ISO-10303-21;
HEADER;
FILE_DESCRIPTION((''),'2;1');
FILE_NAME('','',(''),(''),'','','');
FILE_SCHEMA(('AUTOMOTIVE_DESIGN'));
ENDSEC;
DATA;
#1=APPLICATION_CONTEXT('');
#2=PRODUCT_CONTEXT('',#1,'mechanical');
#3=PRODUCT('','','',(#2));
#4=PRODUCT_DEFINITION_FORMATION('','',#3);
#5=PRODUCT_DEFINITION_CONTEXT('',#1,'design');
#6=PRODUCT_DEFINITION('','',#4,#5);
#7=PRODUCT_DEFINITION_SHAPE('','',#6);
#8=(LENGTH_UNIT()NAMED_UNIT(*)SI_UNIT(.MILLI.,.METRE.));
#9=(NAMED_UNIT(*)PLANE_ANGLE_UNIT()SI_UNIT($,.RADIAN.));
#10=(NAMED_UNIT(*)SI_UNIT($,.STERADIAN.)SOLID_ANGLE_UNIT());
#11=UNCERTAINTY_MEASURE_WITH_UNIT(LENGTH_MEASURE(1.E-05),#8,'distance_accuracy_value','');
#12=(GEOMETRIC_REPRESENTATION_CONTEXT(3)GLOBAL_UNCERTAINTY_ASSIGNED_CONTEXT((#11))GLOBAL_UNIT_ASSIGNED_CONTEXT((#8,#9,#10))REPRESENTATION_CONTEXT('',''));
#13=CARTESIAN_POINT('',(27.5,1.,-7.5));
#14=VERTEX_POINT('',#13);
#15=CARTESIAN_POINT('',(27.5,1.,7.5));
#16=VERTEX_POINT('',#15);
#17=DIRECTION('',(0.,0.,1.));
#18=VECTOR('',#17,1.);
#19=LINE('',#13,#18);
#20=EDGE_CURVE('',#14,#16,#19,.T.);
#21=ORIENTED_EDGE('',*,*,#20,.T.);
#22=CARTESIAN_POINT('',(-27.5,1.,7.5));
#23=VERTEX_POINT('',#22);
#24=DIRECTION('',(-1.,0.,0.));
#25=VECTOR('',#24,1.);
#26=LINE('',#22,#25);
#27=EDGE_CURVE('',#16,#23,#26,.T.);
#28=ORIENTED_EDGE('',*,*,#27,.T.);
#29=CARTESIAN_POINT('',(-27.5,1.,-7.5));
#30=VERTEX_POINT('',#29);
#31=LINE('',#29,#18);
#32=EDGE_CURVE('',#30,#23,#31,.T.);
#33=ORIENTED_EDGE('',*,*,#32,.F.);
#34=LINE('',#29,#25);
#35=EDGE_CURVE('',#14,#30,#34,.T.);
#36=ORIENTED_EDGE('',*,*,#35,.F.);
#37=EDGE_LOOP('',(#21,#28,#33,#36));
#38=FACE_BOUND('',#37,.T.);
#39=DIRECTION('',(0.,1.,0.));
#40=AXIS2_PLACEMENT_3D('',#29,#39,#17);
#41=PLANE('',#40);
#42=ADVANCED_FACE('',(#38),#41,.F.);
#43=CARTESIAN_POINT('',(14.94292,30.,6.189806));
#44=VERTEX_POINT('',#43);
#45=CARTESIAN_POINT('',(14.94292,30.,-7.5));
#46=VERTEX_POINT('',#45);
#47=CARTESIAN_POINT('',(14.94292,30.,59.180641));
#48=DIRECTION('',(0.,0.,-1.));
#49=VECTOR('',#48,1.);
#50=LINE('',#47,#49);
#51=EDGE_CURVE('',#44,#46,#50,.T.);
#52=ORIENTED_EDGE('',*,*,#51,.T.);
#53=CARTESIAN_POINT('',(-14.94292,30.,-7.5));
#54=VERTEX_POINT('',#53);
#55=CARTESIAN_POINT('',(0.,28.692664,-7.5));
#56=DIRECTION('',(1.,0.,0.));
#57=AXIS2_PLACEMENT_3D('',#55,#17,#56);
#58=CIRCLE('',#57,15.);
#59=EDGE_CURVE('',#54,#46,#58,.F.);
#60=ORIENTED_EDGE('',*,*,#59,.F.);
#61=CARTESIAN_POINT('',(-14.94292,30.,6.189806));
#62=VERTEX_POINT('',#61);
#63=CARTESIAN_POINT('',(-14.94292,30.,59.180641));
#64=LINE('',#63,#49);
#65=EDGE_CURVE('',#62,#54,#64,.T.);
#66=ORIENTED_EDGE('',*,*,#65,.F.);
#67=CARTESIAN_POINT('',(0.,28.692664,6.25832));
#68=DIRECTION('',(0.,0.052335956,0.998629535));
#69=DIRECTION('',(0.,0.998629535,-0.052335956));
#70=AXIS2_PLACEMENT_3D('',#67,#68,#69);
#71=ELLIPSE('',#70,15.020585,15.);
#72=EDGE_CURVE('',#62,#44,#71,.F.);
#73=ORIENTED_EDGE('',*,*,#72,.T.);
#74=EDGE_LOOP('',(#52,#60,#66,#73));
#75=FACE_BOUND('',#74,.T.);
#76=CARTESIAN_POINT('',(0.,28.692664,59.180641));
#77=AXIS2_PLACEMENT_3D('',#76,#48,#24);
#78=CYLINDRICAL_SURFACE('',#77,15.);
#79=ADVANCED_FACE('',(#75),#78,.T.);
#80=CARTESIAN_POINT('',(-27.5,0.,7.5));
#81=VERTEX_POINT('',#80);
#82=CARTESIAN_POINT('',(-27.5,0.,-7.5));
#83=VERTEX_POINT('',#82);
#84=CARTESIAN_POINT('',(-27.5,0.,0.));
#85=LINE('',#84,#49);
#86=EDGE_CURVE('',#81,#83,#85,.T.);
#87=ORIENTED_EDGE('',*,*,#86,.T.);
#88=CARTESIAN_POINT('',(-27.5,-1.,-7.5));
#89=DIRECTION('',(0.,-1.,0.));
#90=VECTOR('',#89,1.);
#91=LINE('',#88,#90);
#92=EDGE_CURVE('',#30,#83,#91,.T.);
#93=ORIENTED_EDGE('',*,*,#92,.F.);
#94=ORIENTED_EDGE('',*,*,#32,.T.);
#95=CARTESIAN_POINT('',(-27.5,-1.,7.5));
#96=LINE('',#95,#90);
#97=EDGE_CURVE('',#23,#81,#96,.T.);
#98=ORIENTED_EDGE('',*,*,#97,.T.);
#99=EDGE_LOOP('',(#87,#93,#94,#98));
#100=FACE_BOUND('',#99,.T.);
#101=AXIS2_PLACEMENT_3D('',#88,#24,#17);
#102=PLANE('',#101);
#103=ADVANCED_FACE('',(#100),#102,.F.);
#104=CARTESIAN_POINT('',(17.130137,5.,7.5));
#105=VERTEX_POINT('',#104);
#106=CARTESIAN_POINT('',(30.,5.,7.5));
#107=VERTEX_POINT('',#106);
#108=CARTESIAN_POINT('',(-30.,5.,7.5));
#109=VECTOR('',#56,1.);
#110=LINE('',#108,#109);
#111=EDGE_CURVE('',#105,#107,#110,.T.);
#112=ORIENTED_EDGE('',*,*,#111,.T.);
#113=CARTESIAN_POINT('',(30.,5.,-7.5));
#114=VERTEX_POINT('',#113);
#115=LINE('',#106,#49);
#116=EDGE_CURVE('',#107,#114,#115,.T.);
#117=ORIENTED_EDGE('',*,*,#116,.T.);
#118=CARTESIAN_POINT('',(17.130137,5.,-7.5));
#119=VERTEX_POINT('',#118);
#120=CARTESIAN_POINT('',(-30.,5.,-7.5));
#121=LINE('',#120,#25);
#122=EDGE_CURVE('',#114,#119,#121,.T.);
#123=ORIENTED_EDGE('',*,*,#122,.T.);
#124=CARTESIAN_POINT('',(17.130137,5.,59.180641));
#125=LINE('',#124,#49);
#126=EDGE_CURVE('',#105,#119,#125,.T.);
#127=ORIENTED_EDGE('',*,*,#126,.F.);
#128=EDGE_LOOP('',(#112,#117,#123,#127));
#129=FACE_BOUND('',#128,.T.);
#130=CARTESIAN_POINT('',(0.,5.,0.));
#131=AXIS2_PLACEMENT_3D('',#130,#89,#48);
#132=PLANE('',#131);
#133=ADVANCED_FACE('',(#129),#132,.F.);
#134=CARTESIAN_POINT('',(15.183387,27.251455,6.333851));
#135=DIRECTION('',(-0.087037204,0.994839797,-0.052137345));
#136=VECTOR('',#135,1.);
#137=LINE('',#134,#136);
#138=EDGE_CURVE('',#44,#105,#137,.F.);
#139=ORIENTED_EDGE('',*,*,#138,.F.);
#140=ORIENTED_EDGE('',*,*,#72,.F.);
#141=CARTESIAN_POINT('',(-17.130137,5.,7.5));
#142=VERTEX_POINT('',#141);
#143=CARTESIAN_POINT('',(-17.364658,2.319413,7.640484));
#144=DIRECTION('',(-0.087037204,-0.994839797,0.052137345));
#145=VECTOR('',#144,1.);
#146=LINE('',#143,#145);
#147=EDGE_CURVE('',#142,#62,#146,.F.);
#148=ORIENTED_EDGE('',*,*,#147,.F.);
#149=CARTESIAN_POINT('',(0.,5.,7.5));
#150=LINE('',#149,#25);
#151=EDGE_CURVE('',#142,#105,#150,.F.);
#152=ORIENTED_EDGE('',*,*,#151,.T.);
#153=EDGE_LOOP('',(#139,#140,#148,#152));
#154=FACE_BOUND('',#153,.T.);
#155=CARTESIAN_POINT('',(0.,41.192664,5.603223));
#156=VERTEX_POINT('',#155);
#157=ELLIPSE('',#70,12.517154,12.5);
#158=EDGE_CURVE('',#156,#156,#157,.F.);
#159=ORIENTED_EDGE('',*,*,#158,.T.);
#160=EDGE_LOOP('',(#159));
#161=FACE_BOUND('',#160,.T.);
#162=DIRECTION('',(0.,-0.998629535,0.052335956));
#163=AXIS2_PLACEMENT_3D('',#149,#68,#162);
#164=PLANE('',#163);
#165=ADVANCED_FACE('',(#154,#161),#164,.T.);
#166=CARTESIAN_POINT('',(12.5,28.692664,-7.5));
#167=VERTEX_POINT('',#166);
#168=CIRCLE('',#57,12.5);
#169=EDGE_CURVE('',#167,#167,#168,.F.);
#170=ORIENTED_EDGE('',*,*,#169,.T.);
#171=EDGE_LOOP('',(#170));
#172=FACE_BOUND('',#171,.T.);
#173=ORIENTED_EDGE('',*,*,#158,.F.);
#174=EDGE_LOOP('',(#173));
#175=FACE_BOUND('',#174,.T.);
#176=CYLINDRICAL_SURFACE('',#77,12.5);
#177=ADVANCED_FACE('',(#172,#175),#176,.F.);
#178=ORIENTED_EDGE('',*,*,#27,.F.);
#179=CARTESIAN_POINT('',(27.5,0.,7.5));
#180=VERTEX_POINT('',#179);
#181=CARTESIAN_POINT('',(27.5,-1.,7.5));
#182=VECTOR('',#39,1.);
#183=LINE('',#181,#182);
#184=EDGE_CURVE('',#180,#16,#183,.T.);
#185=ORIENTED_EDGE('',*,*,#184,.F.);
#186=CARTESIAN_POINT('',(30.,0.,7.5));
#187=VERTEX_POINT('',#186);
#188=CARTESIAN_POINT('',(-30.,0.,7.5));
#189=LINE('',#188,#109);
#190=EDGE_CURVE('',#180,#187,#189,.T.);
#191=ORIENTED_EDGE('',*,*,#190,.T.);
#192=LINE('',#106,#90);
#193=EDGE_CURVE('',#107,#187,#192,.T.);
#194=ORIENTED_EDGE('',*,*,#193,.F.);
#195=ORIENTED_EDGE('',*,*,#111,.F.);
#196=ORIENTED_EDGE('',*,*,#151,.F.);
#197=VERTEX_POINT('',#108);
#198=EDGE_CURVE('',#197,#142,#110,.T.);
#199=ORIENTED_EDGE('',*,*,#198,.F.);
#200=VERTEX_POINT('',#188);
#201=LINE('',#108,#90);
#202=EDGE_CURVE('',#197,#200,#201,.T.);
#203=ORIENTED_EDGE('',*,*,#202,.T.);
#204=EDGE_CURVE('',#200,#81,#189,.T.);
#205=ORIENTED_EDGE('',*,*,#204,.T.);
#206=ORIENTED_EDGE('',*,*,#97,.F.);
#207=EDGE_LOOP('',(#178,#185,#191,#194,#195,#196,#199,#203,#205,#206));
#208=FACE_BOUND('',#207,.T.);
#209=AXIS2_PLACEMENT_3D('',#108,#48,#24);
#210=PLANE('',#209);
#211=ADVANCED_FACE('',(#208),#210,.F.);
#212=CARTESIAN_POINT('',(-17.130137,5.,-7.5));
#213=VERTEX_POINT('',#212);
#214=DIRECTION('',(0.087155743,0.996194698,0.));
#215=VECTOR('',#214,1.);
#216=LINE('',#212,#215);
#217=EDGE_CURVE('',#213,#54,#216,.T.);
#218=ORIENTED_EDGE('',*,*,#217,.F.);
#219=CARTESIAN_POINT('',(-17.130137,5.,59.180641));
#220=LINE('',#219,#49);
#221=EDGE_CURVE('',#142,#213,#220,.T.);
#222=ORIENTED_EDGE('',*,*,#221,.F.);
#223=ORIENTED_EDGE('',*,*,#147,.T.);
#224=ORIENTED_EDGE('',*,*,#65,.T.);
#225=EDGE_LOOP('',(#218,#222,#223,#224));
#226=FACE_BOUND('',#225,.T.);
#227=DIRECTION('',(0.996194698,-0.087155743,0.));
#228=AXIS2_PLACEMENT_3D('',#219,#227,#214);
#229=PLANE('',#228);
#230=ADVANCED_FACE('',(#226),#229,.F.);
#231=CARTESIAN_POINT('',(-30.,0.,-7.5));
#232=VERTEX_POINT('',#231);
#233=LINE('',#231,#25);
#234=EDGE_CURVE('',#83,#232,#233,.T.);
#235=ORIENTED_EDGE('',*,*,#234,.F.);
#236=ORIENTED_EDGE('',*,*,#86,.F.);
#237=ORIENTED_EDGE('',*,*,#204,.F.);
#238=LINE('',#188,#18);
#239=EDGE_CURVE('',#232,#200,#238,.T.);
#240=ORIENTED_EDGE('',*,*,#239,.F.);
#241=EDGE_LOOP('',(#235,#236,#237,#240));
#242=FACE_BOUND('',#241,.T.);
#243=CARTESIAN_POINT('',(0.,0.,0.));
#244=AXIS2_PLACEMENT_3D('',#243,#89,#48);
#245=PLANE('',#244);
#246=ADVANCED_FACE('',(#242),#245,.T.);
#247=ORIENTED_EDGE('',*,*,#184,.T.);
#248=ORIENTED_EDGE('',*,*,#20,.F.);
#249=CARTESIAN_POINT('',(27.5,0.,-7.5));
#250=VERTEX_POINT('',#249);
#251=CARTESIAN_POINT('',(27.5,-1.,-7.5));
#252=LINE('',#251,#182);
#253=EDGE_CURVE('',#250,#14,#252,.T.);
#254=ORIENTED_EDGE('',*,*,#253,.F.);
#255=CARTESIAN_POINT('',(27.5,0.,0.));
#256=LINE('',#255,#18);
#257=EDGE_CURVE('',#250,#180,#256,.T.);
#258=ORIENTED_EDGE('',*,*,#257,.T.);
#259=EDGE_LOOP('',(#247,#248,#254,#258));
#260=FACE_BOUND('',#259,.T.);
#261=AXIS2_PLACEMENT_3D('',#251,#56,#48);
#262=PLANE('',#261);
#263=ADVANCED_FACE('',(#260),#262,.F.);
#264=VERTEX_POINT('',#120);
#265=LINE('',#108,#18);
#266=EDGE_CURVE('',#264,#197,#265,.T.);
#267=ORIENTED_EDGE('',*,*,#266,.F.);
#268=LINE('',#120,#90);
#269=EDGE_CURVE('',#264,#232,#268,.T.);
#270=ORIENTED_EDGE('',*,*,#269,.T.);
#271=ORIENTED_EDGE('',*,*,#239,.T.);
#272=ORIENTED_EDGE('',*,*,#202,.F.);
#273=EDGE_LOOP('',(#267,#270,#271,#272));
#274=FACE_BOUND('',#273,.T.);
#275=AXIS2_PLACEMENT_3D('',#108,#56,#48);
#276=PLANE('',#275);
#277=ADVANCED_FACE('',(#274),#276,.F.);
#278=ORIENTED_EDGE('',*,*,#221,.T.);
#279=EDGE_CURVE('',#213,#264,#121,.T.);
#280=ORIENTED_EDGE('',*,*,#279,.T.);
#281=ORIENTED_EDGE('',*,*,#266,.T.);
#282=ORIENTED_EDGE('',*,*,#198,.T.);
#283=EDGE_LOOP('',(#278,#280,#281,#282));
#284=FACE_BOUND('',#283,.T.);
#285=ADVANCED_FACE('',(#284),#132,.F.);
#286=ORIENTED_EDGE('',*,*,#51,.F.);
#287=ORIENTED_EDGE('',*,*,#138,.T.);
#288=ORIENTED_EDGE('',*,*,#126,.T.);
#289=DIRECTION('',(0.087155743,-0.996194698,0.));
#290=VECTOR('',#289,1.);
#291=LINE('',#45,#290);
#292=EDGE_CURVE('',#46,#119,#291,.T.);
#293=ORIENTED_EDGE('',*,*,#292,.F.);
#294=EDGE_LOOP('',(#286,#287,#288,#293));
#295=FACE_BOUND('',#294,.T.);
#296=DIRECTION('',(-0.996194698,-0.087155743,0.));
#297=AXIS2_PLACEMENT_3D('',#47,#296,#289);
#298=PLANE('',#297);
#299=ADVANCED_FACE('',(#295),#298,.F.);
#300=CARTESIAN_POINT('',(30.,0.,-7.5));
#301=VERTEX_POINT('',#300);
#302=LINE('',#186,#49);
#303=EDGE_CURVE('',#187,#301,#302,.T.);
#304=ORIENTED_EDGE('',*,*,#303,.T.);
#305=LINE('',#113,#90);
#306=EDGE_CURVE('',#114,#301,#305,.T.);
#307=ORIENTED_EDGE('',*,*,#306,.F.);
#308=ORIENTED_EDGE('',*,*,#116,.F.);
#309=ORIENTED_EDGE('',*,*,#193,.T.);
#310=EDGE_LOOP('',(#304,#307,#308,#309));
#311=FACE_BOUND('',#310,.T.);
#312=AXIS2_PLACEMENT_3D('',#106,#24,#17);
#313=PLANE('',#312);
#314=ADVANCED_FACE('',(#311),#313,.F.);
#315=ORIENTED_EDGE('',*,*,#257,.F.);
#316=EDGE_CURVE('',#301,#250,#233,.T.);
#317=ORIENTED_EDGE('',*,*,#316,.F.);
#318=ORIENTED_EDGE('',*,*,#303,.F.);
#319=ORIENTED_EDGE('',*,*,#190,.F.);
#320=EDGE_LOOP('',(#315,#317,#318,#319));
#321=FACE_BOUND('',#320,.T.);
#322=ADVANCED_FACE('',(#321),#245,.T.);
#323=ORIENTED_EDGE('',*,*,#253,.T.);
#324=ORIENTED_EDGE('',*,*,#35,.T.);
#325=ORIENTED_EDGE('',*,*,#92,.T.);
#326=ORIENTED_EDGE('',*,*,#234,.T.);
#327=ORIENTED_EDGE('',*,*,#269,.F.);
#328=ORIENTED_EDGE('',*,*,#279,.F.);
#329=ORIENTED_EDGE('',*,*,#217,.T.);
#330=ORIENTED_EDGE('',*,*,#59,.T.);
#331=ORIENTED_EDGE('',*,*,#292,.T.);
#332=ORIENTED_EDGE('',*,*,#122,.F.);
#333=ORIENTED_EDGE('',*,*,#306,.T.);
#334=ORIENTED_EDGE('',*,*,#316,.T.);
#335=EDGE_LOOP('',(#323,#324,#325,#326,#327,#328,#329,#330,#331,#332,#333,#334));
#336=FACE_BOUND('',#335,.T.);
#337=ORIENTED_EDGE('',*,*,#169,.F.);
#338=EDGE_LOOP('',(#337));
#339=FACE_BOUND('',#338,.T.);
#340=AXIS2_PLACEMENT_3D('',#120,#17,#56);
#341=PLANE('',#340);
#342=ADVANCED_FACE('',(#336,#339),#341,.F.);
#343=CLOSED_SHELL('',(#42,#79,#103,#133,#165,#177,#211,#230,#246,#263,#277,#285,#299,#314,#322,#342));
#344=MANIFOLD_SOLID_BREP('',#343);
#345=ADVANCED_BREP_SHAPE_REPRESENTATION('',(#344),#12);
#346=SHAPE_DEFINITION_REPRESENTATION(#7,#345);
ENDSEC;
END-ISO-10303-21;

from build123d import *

# Parameters (mm, degrees)
SKETCH1_W                       = 60
SKETCH1_H                       = 15
BOSS_EXTRUDE1_DEPTH             = 5
BOSS_EXTRUDE2_REACH             = 33.325
SKETCH2_R                       = 12.5
BOSS_EXTRUDE2_DIRECTION_2_REACH = 33.325
SKETCH3_W                       = 55
SKETCH3_H                       = 2
CUT_EXTRUDE1_DEPTH              = 56.082201073
DRAFT1_START                    = 7.751401292
DRAFT1_DEPTH                    = 3.248598708


with BuildPart() as part:
    # Sketch1 → Boss-Extrude1 (new body)
    with BuildSketch(Plane(origin=(0, 0, 0), x_dir=(1, 0, 0), z_dir=(0, 1, 0))):
        Rectangle(SKETCH1_W, SKETCH1_H)
    extrude(amount=BOSS_EXTRUDE1_DEPTH)

    # Boss-Extrude2: up to this face of the body (flat: up to its plane)
    boss_extrude2_end = Plane(part.part.faces().sort_by_distance((0, 2.5, 7.5))[0])
    # Sketch2 → Boss-Extrude2 (add, up to the picked face)
    with BuildSketch(Plane.XY, mode=Mode.PRIVATE) as boss_extrude2_sk1:
        with BuildLine():
            Line((-17.13013706, 5), (-14.942920471, 30))
            ThreePointArc((-14.942920471, 30), (0, 43.692663859), (14.942920471, 30))
            Line((14.942920471, 30), (17.13013706, 5))
            Line((17.13013706, 5), (-17.13013706, 5))
        make_face()
        with Locations(Location((0, 28.692663859, 0), (0, 0, 180))):
            Circle(SKETCH2_R, mode=Mode.SUBTRACT)
    boss_extrude2_tool1 = split(extrude(boss_extrude2_sk1.sketch, amount=BOSS_EXTRUDE2_REACH, mode=Mode.PRIVATE), bisect_by=boss_extrude2_end, keep=Keep.BOTH, mode=Mode.PRIVATE)
    add(boss_extrude2_tool1.solids().sort_by(Axis((15.521689, 17.454957, 0), (0, 0, 1)))[0])

    # Boss-Extrude2 direction 2: up to this face of the body (flat: up to its plane)
    boss_extrude2_direction_2_end = Plane(part.part.faces().sort_by_distance((0, 2.5, -7.5))[0])
    # Sketch2 → Boss-Extrude2 direction 2 (add, up to the picked face)
    with BuildSketch(Plane.XY, mode=Mode.PRIVATE) as boss_extrude2_direction_2_sk1:
        with BuildLine():
            Line((-17.13013706, 5), (-14.942920471, 30))
            ThreePointArc((-14.942920471, 30), (0, 43.692663859), (14.942920471, 30))
            Line((14.942920471, 30), (17.13013706, 5))
            Line((17.13013706, 5), (-17.13013706, 5))
        make_face()
        with Locations(Location((0, 28.692663859, 0), (0, 0, 180))):
            Circle(SKETCH2_R, mode=Mode.SUBTRACT)
    boss_extrude2_direction_2_tool1 = split(extrude(boss_extrude2_direction_2_sk1.sketch, amount=-BOSS_EXTRUDE2_DIRECTION_2_REACH, mode=Mode.PRIVATE), bisect_by=boss_extrude2_direction_2_end, keep=Keep.BOTH, mode=Mode.PRIVATE)
    add(boss_extrude2_direction_2_tool1.solids().sort_by(Axis((15.521689, 17.454957, 0), (0, 0, -1)))[0])

    # Sketch3 → Cut-Extrude1 (cut, through all)
    with BuildSketch(Plane.XY.offset(7.5)):
        Rectangle(SKETCH3_W, SKETCH3_H)
    extrude(amount=-CUT_EXTRUDE1_DEPTH, mode=Mode.SUBTRACT)

    # Draft1: read off the stored shape, not the designer's step
    # Draft1 outline → Draft1 (cut)
    with BuildSketch(Plane(origin=(0, 0, 0), x_dir=(1, 0, 0), z_dir=(0, 0.05233595624294388, 0.9986295347545738)).offset(DRAFT1_START)):
        with BuildLine():
            add(Edge.make_bspline(
                [(14.942920471, 29.634936652), (13.74496761, 43.346391583), (0, 43.346391583), (-13.74496761, 43.346391583), (-14.942920471, 29.634936652)],
                knots=[4.799655443, 4.799655443, 4.799655443, 6.283185307, 6.283185307, 7.766715171, 7.766715171, 7.766715171], degree=2, weights=[1, 0.737277337, 1, 0.737277337, 1]))
            Line((-14.942920471, 29.634936652), (-17.13013706, 4.600628002))
            Line((-17.13013706, 4.600628002), (17.13013706, 4.600628002))
            Line((17.13013706, 4.600628002), (14.942920471, 29.634936652))
        make_face()
    extrude(amount=DRAFT1_DEPTH, mode=Mode.SUBTRACT)


solid = part.part
